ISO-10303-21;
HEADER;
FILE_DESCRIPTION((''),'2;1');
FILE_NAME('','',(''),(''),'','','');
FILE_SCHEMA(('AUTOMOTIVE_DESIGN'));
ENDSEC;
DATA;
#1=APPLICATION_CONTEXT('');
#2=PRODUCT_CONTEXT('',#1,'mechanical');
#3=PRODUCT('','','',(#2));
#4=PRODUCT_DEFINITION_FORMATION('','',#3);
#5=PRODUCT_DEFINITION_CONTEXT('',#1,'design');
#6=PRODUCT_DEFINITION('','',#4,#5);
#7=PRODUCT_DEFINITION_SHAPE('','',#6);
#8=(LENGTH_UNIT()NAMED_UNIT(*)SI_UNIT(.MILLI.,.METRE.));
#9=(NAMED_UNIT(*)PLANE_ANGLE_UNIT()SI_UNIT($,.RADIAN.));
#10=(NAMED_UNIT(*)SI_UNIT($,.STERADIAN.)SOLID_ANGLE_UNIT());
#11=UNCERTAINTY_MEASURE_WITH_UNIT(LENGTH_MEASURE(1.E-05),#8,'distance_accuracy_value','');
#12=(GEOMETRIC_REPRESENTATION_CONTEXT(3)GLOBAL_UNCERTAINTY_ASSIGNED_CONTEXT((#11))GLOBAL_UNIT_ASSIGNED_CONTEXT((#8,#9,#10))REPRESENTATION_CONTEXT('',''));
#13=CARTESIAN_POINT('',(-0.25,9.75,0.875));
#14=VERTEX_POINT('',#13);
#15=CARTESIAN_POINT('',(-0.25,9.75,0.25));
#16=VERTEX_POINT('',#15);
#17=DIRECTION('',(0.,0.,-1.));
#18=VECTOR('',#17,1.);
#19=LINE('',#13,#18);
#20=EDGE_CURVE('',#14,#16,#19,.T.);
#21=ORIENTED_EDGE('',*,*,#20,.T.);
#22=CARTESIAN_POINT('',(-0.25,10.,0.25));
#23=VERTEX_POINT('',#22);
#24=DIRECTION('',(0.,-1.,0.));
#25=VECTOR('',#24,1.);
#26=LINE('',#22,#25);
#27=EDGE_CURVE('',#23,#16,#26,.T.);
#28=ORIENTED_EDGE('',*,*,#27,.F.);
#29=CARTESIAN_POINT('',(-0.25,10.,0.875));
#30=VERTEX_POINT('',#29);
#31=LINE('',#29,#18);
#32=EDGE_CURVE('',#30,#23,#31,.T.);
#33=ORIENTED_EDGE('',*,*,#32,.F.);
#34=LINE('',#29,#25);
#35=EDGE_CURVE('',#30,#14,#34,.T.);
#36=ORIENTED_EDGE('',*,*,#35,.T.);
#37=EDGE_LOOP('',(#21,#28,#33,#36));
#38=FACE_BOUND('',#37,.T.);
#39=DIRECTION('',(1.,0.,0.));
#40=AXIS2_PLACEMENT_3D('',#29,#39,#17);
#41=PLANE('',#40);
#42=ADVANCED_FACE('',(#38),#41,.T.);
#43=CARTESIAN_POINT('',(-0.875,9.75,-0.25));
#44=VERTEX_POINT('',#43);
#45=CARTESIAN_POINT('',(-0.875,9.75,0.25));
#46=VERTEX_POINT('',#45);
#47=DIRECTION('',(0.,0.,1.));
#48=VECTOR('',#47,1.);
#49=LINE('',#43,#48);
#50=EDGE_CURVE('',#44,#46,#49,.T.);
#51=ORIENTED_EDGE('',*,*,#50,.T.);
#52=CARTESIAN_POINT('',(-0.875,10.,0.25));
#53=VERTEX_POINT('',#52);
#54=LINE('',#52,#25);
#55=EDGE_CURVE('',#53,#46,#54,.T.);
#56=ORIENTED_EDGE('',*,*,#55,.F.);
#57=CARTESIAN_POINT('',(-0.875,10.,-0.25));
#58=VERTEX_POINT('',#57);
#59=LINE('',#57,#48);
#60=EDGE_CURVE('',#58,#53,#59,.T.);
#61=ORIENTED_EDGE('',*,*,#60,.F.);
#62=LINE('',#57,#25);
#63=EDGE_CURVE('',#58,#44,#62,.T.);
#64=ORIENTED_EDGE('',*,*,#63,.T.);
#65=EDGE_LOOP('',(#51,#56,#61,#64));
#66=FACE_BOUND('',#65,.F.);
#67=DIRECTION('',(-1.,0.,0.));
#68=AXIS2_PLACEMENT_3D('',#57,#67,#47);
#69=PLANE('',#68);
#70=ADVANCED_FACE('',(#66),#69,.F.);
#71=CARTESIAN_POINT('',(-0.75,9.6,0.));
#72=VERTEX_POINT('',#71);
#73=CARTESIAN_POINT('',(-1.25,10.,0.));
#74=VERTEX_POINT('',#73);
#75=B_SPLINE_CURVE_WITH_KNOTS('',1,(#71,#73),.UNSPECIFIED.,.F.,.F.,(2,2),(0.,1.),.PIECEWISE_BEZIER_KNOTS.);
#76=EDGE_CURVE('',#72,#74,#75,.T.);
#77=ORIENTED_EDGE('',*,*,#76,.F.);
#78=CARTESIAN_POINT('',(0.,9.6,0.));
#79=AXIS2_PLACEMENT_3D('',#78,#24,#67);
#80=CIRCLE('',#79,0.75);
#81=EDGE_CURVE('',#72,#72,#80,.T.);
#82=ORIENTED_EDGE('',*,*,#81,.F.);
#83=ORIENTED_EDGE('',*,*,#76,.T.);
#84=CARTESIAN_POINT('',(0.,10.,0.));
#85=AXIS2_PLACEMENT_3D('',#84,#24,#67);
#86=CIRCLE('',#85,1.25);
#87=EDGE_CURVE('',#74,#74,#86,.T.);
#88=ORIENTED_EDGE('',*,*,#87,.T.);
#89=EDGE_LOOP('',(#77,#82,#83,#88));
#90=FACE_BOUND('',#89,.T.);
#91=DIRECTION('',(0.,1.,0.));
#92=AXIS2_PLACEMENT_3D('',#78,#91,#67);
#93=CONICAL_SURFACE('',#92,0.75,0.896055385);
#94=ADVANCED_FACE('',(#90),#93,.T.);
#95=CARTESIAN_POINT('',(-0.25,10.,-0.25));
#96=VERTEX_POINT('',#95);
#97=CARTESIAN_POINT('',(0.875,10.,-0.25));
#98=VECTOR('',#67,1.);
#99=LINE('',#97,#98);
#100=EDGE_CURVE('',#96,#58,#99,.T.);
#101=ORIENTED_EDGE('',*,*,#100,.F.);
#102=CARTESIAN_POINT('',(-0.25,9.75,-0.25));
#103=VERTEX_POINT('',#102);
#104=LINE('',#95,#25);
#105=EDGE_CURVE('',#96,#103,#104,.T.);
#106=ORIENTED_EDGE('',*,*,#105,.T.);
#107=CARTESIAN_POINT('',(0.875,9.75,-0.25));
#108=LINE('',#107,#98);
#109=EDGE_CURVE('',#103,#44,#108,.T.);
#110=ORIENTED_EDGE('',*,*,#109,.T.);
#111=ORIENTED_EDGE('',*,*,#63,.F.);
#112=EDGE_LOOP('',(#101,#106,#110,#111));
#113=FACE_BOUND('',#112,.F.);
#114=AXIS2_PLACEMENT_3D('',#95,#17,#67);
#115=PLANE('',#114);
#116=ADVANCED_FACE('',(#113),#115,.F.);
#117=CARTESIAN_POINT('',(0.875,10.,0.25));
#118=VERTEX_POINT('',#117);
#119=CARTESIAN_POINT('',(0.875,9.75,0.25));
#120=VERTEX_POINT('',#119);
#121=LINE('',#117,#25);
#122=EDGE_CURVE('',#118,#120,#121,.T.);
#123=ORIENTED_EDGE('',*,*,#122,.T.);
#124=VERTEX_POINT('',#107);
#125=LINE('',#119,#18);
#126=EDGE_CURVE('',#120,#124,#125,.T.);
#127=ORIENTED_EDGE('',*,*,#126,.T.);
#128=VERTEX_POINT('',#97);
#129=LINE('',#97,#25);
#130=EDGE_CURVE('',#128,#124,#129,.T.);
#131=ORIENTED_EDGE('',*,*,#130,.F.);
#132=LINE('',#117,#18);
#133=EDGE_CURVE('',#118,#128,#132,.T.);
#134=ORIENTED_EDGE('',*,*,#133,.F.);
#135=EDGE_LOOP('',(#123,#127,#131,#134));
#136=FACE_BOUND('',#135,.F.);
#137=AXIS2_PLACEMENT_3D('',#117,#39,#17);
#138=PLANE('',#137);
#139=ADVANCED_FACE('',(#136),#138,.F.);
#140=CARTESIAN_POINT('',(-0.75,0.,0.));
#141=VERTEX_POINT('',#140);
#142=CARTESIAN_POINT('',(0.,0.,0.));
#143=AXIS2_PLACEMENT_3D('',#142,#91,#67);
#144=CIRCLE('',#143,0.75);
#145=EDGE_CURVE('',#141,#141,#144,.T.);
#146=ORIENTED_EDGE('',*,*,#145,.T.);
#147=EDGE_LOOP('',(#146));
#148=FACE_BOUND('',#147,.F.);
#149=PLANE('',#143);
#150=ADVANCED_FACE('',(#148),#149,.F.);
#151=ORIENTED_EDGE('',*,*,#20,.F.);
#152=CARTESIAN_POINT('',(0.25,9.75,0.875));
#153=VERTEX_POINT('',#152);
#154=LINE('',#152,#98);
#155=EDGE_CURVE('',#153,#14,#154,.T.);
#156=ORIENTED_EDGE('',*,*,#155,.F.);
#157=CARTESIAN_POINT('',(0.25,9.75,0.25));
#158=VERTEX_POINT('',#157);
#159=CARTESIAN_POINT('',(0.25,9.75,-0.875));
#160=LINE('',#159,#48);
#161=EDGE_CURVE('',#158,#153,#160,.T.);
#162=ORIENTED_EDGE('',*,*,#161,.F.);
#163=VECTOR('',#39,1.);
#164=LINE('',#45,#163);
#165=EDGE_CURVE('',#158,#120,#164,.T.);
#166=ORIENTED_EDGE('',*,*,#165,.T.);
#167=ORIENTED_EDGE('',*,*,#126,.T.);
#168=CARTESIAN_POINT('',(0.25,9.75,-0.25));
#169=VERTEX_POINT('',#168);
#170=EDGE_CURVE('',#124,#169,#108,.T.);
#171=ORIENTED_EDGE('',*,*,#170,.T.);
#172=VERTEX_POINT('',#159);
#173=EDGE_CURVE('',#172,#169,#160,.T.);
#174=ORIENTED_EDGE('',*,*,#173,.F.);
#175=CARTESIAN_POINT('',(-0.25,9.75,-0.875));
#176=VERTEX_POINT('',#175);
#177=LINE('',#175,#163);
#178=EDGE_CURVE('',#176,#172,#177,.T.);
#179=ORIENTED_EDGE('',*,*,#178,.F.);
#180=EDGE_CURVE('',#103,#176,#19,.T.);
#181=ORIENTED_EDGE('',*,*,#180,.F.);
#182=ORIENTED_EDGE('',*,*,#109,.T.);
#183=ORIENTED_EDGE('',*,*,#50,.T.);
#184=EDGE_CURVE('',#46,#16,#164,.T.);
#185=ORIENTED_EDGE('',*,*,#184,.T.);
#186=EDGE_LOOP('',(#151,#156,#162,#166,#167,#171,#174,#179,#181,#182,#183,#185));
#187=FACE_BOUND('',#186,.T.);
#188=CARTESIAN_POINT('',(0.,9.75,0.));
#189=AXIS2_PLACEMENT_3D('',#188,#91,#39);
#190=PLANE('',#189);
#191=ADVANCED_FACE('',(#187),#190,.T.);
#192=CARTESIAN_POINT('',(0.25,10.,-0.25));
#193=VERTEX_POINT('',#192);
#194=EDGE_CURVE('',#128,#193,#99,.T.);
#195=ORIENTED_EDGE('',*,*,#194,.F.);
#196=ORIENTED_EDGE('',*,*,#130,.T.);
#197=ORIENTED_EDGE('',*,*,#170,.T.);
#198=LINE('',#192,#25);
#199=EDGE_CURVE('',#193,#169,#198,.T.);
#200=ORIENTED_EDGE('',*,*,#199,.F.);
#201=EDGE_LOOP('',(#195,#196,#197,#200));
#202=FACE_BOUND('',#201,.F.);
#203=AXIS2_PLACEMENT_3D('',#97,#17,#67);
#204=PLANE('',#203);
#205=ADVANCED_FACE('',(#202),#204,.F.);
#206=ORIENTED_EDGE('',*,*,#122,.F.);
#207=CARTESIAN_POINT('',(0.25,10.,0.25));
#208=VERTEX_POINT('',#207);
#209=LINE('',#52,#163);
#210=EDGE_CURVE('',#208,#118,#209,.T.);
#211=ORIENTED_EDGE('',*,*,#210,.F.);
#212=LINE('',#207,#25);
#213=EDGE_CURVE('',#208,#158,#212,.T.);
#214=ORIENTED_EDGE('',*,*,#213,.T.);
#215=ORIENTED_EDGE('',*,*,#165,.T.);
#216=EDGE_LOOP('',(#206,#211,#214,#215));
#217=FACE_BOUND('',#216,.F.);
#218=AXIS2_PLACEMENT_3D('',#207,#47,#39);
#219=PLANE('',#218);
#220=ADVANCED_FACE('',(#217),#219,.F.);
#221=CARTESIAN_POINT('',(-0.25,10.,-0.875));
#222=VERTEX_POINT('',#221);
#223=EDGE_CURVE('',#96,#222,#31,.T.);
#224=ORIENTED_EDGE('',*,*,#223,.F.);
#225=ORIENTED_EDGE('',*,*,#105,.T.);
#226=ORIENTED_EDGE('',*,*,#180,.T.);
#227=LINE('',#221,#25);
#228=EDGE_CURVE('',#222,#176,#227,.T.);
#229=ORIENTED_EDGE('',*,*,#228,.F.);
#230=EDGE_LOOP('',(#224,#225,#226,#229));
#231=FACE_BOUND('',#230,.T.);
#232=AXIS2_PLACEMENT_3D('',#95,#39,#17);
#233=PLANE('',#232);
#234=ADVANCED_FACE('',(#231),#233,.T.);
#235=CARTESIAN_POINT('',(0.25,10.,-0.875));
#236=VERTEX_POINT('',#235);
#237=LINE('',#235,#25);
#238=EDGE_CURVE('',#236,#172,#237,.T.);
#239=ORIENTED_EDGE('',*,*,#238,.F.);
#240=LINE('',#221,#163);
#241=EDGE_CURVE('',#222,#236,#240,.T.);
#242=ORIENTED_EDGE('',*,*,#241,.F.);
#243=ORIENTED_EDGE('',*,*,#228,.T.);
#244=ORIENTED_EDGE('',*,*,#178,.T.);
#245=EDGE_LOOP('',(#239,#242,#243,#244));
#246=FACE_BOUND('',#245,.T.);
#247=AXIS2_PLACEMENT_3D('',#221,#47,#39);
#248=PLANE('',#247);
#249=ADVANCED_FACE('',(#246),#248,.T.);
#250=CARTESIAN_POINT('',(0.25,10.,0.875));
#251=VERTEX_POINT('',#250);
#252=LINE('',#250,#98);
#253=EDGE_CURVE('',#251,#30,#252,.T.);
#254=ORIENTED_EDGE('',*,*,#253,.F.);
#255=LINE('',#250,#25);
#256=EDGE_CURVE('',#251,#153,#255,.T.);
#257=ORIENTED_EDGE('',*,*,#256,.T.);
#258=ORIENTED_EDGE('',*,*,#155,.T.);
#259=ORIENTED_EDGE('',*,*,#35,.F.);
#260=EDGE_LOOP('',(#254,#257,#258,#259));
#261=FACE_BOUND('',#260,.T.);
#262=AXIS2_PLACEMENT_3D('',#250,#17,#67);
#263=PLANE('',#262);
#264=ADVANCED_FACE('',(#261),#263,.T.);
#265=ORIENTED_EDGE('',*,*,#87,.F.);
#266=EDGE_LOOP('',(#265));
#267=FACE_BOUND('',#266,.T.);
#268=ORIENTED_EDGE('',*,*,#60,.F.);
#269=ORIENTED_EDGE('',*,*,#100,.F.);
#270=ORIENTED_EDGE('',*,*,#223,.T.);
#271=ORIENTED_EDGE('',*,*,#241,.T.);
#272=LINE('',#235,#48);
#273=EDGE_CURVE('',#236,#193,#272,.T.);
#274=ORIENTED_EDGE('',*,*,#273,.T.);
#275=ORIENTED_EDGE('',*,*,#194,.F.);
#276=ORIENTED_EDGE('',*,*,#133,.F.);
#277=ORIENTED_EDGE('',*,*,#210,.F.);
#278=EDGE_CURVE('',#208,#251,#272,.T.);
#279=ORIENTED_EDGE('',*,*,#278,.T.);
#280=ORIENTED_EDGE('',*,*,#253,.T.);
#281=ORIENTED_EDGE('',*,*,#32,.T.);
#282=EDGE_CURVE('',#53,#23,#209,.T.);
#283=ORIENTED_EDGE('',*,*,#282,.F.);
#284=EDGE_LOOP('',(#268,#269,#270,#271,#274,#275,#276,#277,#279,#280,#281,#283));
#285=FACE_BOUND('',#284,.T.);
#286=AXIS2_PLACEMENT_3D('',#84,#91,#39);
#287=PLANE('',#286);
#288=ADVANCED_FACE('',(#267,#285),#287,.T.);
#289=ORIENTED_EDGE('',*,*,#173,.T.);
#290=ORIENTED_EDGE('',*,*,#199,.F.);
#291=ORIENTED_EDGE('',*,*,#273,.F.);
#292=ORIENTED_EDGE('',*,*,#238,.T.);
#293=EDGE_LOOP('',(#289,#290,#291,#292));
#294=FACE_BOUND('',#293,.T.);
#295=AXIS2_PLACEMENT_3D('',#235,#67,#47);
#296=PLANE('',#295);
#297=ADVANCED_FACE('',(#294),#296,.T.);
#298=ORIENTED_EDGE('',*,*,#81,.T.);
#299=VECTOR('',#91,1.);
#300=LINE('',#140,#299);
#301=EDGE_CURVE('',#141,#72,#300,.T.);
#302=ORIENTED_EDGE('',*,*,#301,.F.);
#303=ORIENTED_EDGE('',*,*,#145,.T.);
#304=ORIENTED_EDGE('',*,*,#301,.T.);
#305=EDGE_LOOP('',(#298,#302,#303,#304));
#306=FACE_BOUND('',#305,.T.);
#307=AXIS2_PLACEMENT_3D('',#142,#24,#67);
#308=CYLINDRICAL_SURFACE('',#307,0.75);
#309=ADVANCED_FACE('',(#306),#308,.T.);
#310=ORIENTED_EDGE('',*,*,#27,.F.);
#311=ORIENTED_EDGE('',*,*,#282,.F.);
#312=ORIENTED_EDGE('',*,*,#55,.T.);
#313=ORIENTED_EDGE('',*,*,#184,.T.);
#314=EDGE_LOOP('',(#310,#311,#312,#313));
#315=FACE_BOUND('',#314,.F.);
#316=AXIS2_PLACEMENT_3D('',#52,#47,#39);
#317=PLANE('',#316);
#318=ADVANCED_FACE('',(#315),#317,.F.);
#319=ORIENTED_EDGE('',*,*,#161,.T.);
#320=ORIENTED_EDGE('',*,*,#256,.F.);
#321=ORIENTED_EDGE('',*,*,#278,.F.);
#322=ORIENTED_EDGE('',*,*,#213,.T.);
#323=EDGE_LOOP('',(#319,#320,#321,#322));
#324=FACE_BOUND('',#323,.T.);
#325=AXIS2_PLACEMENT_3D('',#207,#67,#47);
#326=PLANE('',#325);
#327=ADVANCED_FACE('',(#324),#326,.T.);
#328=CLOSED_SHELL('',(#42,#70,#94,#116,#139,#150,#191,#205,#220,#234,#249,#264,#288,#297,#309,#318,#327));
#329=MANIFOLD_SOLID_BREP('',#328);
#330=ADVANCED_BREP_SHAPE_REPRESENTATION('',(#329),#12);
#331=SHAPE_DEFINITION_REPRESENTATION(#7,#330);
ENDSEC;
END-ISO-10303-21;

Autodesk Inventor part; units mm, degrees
ref_plane "YZ Plane" through (0, 0, 0) normal (1, 0, 0) x (0, 1, 0)
ref_plane "XZ Plane" through (0, 0, 0) normal (0, 1, 0) x (-1, 0, 0)
sketch "Esboço1" plane through (0, 0, 0) normal (0, 1, 0) x (-1, 0, 0)
  circle A0 centre (0, 0) radius 0.75
  dimension "d1" = 1.5
extrude "Extrusão1" add sketch "Esboço1" along normal blind 9.6
ref_plane "Plano de trabalho1" through (0, 10, 0) normal (0, 1, 0) x (1, 0, 0)
sketch "Esboço2" plane through (0, 10, 0) normal (0, 1, 0) x (1, 0, 0)
  circle A0 centre (0, 0) radius 1.25
  dimension "d5" = 2.5
loft "Transição1" add profiles "Esboço2" section 1 edges at (0.75, 9.6, 0)
sketch "Esboço3" plane through (0, 10, 0) normal (0, 1, 0) x (1, 0, 0)
  line L0 (0.25, -0.875) -> (-0.25, -0.875)
  line L1 (-0.25, -0.875) -> (-0.25, 0.875)
  line L2 (-0.25, 0.875) -> (0.25, 0.875)
  line L3 (0.25, 0.875) -> (0.25, -0.875)
  line L4 (0.25, -0.875) -> (-0.25, 0.875) construction
  line L5 (-0.25, -0.875) -> (0.25, 0.875) construction
  line L6 (-0.875, -0.25) -> (0.875, -0.25)
  line L7 (0.875, -0.25) -> (0.875, 0.25)
  line L8 (0.875, 0.25) -> (-0.875, 0.25)
  line L9 (-0.875, 0.25) -> (-0.875, -0.25)
  line L10 (-0.875, -0.25) -> (0.875, 0.25) construction
  line L11 (0.875, -0.25) -> (-0.875, 0.25) construction
  point P0 (0, 0)
  point P1 (-0.25, 0.25)
  point P2 (-0.25, -0.25)
  point P3 (0.25, -0.25)
  point P4 (0.25, 0.25)
  dimension "d10" = 0.5
  dimension "d11" = 1.75
  dimension "d14" = 1.75
  dimension "d15" = 0.5
extrude "Extrusão2" cut sketch "Esboço3" against normal blind 0.25
thread "Rosca1" size "M1.6x0.35" class "6g" standard "ANSI Metric M Profile" length 5
properties part number "Parafuso"
